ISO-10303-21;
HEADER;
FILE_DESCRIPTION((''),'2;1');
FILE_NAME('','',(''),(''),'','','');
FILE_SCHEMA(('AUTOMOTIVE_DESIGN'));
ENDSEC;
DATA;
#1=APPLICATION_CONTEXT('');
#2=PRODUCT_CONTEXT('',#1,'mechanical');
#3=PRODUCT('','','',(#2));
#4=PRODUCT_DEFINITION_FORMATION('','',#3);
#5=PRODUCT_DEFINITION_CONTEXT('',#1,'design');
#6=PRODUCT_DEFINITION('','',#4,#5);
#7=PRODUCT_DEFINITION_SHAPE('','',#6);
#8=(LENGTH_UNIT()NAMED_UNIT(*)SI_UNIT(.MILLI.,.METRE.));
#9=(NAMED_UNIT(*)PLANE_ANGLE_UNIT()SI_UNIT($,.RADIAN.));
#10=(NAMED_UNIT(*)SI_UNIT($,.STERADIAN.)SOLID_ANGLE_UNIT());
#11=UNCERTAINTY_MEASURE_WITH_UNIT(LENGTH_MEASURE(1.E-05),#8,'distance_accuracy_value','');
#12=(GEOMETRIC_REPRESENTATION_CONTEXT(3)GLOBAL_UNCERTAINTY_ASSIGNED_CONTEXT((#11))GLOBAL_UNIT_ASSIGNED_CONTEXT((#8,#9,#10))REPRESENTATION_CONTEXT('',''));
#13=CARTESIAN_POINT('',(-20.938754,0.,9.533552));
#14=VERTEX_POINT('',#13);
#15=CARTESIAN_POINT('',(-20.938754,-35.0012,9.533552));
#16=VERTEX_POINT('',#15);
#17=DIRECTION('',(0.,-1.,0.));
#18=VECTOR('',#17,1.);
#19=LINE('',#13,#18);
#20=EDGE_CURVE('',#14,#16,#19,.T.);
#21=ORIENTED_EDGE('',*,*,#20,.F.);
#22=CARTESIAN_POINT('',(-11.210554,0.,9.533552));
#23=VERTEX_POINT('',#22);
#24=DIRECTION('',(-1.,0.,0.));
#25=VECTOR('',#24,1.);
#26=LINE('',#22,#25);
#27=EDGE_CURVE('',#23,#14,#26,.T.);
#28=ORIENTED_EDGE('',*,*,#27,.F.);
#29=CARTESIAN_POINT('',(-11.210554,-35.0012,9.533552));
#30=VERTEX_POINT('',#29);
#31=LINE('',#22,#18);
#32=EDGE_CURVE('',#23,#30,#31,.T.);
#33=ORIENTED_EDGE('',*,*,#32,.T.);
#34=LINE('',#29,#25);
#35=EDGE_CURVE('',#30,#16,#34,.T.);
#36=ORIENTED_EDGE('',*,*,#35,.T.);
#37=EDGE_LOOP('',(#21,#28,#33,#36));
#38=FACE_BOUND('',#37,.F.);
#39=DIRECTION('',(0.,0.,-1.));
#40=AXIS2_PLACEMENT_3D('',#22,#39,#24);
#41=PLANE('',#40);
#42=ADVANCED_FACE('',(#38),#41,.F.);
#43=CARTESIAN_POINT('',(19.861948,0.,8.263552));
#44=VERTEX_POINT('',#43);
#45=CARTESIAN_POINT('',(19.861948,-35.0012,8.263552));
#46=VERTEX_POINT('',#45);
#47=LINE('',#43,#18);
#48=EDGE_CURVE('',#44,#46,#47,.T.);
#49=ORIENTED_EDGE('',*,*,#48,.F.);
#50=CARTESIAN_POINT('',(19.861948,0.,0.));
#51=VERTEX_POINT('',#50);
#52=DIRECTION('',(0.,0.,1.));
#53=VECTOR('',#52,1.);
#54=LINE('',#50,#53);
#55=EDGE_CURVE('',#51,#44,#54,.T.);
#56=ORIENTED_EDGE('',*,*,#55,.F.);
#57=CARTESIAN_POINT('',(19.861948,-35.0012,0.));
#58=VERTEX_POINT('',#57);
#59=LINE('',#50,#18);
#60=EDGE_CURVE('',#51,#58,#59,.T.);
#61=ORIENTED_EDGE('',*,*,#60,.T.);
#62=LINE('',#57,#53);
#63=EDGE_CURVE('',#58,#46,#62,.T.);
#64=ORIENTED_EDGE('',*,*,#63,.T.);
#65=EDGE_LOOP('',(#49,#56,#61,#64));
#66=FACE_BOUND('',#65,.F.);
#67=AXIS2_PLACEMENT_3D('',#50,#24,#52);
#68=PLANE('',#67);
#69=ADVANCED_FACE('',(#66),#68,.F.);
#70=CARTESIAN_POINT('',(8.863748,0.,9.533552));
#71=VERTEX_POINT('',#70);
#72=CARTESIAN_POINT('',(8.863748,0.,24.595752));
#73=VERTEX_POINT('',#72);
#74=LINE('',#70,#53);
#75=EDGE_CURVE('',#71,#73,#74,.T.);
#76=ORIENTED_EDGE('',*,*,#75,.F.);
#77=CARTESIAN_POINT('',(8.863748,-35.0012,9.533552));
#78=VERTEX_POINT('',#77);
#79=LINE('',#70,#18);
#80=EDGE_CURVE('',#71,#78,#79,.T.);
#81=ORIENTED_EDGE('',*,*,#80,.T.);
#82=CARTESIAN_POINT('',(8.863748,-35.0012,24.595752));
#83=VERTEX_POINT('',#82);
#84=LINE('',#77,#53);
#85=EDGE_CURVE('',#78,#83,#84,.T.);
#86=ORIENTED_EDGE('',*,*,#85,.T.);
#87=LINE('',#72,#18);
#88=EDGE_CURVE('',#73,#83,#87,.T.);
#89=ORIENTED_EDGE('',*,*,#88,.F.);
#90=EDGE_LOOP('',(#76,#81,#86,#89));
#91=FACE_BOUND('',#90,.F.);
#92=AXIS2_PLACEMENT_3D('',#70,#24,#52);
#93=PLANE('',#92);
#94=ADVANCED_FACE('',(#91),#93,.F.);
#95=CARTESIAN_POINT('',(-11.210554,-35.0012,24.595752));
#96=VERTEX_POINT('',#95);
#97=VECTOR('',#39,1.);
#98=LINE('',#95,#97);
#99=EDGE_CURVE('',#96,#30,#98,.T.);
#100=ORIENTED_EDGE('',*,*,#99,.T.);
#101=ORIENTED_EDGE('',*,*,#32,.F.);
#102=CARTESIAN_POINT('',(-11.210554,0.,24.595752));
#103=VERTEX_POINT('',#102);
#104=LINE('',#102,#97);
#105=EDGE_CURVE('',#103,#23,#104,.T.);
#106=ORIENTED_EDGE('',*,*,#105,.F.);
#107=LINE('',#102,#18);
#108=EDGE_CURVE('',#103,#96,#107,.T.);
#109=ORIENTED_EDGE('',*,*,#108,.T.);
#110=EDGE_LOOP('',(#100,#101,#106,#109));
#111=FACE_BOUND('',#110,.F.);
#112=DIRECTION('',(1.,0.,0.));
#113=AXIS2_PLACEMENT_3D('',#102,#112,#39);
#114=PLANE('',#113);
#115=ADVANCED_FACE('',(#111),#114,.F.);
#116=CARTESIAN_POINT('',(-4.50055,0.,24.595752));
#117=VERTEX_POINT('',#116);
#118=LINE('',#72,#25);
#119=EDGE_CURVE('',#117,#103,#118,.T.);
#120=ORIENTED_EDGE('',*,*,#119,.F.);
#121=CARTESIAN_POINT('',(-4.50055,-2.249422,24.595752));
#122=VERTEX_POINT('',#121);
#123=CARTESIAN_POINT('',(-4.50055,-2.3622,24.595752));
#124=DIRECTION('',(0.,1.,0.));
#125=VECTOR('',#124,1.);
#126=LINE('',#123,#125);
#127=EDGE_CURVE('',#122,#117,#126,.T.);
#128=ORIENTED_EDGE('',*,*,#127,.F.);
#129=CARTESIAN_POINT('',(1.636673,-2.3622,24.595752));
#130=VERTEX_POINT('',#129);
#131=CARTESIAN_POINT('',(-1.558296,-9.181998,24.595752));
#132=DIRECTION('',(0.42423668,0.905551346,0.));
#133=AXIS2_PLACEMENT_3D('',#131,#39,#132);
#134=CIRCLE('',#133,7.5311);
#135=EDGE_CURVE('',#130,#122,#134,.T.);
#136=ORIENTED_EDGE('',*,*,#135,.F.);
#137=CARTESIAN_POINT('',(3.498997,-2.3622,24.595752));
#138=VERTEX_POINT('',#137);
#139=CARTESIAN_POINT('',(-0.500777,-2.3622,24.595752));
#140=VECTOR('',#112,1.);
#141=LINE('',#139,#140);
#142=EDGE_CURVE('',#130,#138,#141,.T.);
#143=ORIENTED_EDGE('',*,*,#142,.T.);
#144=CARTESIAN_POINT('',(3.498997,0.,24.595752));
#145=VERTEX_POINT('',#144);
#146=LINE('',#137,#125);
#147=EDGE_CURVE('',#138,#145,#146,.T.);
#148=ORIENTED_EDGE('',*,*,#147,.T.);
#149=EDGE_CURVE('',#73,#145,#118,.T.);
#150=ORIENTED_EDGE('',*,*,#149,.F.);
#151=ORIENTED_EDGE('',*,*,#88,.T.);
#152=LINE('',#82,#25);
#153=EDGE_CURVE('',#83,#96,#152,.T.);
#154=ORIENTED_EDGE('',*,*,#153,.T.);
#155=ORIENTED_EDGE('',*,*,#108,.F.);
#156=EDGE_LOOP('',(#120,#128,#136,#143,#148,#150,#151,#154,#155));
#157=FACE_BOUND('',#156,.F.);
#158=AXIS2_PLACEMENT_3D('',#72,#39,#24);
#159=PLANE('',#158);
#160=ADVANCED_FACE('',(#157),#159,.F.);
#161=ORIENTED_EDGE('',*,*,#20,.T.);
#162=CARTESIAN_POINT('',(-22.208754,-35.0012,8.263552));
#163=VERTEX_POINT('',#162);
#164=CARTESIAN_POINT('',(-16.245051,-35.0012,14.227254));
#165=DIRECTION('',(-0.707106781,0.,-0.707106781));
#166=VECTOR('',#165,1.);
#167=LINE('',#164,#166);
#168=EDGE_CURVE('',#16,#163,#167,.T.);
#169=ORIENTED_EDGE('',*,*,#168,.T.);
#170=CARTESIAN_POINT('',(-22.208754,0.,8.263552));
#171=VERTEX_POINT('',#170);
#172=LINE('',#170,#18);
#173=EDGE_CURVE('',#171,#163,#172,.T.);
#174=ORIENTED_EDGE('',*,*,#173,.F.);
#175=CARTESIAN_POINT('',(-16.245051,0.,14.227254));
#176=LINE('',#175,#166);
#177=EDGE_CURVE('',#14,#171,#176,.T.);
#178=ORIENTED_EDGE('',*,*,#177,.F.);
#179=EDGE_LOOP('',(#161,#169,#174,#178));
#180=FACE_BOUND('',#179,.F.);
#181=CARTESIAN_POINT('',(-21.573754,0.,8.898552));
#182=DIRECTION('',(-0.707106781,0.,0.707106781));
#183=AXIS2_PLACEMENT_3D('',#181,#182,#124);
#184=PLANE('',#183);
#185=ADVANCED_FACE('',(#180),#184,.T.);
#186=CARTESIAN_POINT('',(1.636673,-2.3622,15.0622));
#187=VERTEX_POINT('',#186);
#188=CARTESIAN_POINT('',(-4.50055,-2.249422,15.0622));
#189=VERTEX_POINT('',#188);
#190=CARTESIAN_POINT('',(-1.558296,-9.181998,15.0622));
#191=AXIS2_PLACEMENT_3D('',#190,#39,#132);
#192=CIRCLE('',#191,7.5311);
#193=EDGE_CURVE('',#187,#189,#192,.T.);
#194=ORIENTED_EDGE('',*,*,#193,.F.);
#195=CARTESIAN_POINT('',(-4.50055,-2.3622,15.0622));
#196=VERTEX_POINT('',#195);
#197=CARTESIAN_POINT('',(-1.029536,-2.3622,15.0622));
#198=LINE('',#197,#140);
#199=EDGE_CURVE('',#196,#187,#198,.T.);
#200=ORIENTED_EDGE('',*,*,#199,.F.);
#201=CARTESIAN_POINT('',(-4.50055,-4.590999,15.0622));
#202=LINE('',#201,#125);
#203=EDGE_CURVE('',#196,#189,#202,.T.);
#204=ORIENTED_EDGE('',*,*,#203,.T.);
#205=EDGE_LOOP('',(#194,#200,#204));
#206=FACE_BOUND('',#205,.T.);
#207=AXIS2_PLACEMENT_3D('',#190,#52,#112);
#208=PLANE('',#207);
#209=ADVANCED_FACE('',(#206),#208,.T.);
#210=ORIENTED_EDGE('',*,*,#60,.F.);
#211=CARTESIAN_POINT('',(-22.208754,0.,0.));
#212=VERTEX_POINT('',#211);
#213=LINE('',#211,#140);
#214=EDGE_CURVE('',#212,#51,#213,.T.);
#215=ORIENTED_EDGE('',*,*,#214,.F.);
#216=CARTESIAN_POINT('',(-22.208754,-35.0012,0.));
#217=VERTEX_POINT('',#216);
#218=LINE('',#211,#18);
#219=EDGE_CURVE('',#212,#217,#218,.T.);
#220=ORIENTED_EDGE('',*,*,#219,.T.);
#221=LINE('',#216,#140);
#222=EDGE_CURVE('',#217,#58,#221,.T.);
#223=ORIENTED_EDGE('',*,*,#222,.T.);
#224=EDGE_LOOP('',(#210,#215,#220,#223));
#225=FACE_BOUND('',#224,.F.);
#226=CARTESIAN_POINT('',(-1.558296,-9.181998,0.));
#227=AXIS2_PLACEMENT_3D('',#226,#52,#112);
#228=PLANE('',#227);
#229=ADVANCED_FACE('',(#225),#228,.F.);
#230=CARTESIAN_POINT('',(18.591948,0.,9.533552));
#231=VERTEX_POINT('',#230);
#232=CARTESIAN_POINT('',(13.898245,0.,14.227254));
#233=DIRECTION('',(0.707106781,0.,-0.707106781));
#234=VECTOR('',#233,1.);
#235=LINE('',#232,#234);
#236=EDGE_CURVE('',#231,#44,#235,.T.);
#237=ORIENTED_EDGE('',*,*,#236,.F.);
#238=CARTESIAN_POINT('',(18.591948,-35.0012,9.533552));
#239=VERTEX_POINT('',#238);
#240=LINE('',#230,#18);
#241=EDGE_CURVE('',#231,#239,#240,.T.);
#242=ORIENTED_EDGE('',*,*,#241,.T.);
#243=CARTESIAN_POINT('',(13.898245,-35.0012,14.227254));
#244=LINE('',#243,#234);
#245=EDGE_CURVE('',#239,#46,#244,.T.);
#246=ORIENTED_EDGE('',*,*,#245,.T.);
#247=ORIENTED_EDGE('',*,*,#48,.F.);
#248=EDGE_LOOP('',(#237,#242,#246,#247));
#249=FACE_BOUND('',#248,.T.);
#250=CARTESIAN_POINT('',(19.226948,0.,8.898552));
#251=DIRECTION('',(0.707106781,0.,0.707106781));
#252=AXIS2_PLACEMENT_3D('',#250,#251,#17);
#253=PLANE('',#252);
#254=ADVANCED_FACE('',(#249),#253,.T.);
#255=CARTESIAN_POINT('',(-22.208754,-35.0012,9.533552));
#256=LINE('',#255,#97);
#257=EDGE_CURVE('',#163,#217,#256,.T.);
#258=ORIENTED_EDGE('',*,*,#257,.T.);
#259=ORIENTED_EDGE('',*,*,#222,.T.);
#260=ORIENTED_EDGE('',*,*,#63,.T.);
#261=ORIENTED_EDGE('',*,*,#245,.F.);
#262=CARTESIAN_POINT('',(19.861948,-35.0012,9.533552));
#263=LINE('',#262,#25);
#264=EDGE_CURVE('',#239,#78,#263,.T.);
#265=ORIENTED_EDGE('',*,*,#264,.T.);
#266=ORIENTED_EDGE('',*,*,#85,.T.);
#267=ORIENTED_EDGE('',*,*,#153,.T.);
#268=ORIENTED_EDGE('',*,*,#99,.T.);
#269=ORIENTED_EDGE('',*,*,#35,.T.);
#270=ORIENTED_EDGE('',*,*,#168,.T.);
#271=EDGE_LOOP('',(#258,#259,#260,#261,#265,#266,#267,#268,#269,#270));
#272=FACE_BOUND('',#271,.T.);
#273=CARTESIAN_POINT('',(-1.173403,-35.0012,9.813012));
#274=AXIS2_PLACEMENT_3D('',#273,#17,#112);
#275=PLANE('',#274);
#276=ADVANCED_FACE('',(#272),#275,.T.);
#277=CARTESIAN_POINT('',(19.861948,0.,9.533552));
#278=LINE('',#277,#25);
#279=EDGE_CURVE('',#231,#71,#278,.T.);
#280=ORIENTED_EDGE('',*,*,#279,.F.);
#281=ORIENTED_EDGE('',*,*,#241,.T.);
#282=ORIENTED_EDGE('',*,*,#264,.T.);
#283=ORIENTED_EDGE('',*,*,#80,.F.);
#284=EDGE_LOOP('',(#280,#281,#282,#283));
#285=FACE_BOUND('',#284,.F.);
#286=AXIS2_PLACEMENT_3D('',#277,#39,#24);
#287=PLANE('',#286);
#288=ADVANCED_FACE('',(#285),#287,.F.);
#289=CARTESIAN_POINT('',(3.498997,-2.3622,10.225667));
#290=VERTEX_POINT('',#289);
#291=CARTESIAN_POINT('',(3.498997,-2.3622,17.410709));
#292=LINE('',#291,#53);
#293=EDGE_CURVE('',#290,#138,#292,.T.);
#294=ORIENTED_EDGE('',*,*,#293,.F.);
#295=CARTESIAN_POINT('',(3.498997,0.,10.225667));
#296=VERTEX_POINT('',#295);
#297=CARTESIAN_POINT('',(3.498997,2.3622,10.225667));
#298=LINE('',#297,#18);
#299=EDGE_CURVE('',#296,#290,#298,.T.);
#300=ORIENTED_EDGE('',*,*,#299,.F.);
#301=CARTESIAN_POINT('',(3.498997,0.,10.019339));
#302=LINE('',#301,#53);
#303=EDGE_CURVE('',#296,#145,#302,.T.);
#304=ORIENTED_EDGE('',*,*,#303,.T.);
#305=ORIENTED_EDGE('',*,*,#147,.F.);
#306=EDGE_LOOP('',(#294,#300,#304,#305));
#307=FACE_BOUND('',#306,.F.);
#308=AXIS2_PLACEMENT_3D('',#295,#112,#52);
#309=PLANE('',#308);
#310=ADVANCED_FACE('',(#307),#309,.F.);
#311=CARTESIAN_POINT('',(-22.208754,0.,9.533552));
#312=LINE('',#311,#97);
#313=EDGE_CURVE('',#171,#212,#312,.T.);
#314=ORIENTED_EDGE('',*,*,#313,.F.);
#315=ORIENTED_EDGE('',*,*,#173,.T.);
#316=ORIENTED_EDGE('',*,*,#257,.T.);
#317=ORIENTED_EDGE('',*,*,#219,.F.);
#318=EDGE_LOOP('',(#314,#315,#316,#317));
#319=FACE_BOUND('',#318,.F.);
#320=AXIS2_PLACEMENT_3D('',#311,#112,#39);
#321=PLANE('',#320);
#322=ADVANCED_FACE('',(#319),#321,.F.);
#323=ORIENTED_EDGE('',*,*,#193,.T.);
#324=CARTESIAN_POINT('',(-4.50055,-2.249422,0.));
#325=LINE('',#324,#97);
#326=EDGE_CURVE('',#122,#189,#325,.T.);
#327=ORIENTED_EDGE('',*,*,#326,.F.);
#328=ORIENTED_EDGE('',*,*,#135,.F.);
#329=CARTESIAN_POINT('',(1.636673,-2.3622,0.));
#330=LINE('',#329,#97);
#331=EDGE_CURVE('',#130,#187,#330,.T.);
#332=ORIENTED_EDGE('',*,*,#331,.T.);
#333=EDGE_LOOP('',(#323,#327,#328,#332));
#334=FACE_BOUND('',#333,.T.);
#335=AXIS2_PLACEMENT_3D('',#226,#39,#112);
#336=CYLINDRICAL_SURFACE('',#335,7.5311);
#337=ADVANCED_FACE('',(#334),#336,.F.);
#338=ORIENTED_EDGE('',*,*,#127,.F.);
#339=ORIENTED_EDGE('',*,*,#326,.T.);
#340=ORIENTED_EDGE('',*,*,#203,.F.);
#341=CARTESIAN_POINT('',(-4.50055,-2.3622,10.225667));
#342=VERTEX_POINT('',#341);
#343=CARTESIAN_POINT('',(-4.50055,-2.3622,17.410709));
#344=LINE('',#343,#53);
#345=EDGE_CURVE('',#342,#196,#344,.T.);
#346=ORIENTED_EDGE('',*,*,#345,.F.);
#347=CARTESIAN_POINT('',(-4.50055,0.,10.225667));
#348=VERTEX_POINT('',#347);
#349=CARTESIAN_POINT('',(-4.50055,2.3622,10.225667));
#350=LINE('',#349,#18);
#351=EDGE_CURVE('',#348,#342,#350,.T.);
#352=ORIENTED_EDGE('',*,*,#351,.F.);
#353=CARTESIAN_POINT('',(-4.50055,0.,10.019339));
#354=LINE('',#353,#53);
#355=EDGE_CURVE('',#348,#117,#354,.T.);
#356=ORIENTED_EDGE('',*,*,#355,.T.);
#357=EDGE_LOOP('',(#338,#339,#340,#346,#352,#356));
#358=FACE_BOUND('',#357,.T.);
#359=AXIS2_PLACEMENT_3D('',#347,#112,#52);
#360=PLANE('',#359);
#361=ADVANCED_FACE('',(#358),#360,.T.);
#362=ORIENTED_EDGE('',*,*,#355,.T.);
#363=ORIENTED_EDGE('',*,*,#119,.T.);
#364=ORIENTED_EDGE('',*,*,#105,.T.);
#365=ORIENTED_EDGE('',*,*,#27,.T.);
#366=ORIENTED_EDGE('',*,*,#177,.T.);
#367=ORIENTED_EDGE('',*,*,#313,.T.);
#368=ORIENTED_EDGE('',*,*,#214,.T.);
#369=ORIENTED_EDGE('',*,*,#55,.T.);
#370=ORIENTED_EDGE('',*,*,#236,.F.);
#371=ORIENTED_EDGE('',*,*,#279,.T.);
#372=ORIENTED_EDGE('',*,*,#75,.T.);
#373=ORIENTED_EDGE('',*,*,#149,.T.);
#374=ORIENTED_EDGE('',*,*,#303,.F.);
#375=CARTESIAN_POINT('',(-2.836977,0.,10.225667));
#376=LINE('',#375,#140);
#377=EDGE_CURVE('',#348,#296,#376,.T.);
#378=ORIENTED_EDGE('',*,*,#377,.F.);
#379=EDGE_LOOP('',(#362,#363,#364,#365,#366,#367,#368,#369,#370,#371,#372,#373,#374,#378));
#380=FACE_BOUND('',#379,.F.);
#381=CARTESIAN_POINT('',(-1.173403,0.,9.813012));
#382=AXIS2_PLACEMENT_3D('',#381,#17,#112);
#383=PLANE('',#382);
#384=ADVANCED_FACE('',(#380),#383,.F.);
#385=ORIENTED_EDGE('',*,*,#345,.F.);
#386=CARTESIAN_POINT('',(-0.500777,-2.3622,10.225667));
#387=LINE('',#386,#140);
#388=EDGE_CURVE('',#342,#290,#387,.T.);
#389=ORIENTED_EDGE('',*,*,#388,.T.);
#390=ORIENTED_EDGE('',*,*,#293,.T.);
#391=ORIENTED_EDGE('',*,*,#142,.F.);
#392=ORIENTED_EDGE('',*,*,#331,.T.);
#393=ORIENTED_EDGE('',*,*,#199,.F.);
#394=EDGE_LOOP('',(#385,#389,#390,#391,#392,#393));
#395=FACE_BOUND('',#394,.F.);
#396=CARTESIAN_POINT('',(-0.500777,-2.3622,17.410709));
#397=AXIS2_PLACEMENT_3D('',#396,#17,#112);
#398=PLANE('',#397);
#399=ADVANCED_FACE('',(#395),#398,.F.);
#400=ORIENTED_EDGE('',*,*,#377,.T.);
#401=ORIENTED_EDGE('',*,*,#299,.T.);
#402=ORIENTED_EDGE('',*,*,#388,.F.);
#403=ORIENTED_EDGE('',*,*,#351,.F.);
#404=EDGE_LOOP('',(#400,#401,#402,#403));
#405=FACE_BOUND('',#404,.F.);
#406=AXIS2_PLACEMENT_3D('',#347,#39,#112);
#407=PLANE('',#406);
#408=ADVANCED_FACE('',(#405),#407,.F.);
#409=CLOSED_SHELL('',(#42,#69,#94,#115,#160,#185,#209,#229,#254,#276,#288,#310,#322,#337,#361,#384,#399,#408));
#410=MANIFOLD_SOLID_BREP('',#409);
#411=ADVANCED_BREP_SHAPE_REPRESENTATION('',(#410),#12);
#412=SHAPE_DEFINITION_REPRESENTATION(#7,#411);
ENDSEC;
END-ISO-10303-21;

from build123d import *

# Parameters (mm, degrees)
F1_DEPTH = 35.0012
F2_R     = 7.5311
F3_DEPTH = 24.638
F4_DEPTH = 15.0622
F5_W     = 7.9995468259
F5_H     = 14.370085096
F6_DEPTH = 2.3622
F7_SIZE  = 1.27


# Not quite as in the source:
# - a feature names something its author has since deleted; it is built from what else it names


with BuildPart() as f1:
    # F0 (on Front) → F1 (new body)
    with BuildSketch(Plane.XZ):
        Polygon((-22.2087535855, 0), (-22.0162163296, 0), (19.8619475364, 0), (19.8619475364, 9.5335517829), (8.8637475364, 9.5335517829), (8.8637475364, 24.5957517829), (-11.2105535855, 24.5957517829), (-11.2105535855, 9.5335517829), (-22.2087535855, 9.5335517829), align=None)
    extrude(amount=F1_DEPTH)

    # F2 (on Top) → F3 (cut)
    with BuildSketch(Plane.XY):
        with Locations((-1.5582955675, -9.1819977388)):
            Circle(F2_R)
    extrude(amount=F3_DEPTH, mode=Mode.SUBTRACT)

    # F2 (on Top) → F4 (join)
    with BuildSketch(Plane.XY):
        with Locations((-1.5582955675, -9.1819977388)):
            Circle(F2_R)
    extrude(amount=F4_DEPTH)

    # F5 (on face) → F6 (cut, symmetric)
    with BuildSketch(Plane.XZ):
        with Locations((-0.500776805, 17.4107092349)):
            Rectangle(F5_W, F5_H)
    extrude(amount=F6_DEPTH, both=True, mode=Mode.SUBTRACT)

    # F7
    f7_edges = [f1.edges().sort_by_distance(p)[0] for p in [
        (19.861948, -17.5006, 9.533552),
        (-22.208754, -17.5006, 9.533552),
    ]]
    chamfer(f7_edges, length=F7_SIZE)


solid = f1.part
